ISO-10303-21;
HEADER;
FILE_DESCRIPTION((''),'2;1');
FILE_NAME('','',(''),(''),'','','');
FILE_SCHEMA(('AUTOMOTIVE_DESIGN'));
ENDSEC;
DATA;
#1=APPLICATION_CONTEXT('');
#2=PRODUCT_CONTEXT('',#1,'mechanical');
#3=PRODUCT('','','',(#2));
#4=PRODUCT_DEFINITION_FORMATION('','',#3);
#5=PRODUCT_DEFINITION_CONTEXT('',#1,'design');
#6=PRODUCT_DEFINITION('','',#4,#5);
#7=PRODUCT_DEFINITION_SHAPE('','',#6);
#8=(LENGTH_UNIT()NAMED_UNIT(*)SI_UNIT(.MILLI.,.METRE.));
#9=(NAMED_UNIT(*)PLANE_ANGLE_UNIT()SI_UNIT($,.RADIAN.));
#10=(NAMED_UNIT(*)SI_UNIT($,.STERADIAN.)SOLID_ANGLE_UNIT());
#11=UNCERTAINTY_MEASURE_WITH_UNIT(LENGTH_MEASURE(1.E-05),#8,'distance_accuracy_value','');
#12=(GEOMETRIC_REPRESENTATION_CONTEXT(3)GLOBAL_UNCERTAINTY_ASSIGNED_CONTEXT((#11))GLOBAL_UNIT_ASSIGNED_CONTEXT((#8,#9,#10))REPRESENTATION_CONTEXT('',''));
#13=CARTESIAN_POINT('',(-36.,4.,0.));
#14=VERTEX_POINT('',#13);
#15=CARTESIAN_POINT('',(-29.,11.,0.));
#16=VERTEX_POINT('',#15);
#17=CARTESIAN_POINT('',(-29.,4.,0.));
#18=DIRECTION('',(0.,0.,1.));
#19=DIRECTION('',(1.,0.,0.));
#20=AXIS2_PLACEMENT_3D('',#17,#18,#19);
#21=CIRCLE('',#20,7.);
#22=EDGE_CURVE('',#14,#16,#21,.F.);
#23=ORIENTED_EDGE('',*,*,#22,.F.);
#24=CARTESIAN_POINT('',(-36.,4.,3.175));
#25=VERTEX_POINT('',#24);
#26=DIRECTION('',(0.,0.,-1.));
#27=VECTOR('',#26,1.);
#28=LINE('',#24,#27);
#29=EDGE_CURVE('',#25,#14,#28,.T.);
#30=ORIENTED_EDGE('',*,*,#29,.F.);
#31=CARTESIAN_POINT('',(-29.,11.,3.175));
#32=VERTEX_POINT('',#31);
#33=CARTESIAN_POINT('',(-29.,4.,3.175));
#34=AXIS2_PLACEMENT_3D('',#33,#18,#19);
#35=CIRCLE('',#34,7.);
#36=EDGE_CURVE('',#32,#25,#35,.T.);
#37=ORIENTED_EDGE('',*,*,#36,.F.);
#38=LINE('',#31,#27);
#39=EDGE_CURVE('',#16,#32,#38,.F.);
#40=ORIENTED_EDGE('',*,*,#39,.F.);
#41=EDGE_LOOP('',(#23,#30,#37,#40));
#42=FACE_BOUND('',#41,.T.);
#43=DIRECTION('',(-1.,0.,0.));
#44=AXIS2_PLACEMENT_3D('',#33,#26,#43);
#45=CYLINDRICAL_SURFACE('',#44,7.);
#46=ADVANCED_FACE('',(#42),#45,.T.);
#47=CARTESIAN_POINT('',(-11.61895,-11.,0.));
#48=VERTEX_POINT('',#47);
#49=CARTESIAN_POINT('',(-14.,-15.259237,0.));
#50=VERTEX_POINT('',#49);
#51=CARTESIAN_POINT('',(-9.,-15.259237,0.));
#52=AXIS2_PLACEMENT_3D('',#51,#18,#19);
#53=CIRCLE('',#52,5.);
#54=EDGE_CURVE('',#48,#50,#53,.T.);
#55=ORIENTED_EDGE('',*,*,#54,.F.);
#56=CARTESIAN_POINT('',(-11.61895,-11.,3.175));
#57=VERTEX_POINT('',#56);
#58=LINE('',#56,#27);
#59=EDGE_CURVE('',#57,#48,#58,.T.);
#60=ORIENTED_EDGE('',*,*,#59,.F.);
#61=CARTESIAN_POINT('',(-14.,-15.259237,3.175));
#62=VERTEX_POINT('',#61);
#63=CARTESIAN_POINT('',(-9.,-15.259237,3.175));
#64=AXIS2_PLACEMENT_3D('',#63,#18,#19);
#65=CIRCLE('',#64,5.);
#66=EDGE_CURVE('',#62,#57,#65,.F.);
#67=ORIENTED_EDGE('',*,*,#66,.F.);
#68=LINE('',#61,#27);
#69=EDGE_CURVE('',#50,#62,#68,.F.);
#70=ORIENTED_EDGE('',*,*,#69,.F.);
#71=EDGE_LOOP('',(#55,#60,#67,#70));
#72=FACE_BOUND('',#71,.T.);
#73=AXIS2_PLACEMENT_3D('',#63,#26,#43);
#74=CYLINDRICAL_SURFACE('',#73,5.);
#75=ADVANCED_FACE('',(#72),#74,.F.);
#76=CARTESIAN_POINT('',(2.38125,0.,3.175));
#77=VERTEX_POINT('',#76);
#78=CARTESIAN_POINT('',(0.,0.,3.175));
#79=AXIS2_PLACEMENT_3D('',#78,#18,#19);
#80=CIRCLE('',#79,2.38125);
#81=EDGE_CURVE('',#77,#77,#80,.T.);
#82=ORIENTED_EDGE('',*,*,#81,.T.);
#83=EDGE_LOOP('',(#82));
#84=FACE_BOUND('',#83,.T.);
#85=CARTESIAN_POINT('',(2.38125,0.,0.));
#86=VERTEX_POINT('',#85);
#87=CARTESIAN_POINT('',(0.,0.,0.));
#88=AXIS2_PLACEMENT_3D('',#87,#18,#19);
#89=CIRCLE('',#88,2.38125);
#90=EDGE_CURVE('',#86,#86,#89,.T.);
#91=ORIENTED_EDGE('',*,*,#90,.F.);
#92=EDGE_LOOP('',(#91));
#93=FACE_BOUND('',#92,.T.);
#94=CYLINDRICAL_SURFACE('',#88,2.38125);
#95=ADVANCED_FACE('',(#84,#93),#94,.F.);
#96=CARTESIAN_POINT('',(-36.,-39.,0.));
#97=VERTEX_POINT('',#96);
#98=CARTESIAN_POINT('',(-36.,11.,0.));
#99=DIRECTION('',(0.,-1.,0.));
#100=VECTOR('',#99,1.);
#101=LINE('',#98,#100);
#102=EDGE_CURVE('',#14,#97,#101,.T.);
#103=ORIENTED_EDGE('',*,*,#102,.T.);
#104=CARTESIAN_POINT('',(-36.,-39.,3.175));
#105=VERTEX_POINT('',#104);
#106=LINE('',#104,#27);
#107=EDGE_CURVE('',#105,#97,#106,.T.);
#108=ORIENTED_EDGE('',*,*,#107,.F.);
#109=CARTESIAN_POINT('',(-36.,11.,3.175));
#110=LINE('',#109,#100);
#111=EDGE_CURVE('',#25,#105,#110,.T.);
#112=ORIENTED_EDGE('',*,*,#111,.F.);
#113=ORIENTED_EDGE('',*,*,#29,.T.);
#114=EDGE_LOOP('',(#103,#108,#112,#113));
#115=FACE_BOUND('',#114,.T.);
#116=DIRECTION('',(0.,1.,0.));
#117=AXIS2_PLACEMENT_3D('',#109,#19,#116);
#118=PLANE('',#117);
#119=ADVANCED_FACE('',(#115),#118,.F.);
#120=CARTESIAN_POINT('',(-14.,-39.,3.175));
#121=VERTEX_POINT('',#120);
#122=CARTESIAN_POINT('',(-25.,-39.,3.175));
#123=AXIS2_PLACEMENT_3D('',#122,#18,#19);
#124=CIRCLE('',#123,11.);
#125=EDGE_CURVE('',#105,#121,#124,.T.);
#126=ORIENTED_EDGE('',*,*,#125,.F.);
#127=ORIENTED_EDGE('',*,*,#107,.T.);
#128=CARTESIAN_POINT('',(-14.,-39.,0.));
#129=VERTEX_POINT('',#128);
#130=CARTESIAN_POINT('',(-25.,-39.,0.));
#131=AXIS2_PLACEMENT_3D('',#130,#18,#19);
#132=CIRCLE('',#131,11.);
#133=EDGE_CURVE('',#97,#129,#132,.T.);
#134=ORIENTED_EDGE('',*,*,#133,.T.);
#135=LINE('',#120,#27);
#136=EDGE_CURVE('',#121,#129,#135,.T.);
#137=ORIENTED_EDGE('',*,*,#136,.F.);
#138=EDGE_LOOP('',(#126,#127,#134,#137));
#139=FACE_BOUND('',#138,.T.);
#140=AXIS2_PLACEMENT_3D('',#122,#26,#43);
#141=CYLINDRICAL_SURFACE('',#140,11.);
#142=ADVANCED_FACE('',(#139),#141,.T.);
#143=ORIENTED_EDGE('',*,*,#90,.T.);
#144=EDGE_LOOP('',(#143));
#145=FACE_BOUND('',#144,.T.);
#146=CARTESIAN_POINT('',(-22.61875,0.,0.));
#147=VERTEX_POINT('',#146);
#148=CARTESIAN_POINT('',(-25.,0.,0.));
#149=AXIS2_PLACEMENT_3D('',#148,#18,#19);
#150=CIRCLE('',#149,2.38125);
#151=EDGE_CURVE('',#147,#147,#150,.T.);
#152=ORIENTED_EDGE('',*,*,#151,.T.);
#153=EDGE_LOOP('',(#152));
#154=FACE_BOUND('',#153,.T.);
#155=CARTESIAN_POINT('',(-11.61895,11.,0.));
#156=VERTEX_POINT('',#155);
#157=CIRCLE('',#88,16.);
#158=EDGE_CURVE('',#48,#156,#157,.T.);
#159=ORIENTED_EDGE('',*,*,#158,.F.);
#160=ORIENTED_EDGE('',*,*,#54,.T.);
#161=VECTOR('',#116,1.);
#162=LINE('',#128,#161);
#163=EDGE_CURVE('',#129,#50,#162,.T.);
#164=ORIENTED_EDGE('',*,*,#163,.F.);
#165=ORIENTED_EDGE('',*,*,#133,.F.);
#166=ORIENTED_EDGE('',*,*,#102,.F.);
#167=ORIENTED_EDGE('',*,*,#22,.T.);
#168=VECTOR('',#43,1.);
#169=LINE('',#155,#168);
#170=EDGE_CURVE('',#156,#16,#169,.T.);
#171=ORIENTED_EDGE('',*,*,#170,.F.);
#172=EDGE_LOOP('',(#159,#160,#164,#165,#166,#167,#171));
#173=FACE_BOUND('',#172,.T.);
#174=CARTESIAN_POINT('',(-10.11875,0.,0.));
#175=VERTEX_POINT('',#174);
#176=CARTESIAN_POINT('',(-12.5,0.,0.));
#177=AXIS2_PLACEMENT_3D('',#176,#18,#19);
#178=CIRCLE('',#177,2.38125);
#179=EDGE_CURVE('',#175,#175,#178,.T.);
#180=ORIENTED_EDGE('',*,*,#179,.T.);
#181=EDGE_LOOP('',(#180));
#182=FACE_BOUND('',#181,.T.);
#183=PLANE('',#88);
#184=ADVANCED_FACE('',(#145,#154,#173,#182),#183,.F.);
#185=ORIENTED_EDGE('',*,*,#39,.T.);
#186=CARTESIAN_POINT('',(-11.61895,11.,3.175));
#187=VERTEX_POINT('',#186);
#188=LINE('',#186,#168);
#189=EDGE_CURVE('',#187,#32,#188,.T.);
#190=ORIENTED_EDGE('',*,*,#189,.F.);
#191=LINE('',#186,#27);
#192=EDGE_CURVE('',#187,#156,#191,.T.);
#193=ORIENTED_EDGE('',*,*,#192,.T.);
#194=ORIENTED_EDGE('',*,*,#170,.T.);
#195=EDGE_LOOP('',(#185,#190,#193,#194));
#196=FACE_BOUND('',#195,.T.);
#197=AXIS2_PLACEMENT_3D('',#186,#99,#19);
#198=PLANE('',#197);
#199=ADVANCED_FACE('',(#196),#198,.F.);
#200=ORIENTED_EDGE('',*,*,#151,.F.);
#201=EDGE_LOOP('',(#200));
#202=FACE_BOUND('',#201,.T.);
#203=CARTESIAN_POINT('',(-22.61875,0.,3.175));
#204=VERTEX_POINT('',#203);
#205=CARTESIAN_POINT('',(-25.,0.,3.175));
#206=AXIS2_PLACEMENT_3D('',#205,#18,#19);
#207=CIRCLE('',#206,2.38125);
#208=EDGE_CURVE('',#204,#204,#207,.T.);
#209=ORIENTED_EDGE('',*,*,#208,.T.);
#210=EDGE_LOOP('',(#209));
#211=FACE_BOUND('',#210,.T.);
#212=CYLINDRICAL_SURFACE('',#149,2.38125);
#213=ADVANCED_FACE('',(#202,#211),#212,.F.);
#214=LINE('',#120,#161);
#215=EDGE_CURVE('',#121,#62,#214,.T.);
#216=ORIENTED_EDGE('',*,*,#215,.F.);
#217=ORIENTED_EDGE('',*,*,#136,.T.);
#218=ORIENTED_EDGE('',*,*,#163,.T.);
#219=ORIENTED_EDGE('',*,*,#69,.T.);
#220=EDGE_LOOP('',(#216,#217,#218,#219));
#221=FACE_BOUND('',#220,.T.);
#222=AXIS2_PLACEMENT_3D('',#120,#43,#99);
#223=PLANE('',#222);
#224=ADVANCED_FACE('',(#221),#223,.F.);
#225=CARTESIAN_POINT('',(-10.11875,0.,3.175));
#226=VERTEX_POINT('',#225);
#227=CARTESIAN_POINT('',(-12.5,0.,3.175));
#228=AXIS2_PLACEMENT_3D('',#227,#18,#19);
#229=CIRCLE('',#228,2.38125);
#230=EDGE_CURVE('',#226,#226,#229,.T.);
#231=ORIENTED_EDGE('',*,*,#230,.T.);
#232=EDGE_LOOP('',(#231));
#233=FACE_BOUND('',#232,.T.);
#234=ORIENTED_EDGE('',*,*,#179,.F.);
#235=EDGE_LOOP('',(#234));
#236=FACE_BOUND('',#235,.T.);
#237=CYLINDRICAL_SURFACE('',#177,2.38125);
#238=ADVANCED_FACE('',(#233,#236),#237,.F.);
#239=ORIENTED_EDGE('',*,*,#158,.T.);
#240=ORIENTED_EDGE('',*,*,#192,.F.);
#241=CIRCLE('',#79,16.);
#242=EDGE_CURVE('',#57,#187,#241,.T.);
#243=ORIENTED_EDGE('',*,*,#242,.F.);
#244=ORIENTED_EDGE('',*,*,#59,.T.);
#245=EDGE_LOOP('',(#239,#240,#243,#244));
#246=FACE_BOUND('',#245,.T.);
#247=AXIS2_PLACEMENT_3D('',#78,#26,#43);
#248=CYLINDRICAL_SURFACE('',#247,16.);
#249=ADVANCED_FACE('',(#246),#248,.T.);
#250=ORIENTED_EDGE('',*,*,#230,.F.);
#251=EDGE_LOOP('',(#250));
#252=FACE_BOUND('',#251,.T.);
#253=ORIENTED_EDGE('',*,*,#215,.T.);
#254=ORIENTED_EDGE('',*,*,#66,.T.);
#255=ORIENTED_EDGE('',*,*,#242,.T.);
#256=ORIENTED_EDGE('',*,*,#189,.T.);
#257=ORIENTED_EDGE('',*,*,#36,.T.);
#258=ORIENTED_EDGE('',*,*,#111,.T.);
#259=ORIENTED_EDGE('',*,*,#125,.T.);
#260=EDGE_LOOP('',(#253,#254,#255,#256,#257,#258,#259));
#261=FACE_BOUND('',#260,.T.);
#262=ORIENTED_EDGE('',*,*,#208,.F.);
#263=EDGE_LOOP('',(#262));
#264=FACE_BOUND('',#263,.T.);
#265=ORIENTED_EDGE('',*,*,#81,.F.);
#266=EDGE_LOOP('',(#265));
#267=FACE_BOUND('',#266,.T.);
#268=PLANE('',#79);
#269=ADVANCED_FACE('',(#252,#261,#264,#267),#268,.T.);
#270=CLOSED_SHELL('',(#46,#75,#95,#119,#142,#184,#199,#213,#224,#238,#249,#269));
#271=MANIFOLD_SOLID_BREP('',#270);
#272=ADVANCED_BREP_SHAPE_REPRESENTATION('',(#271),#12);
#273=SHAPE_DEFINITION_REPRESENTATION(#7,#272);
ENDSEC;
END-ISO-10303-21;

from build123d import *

# Parameters (mm, degrees)
BOSS_EXTRUDE1_DEPTH = 3.175
FILLET1_R           = 7
FILLET2_R           = 5
SKETCH2_R           = 2.38125
CUT_EXTRUDE1_DEPTH  = 62.693440697
LPATTERN1_COUNT     = 3
LPATTERN1_PITCH     = 12.5


with BuildPart() as part:
    # Sketch1 → Boss-Extrude1 (new body)
    with BuildSketch(Plane.XY):
        with BuildLine():
            Line((-11.618950039, 11), (-36, 11))
            Line((-36, 11), (-36, -39))
            ThreePointArc((-36, -39), (-25, -50), (-14, -39))
            Line((-14, -39), (-14, -11))
            Line((-14, -11), (-11.618950039, -11))
            ThreePointArc((-11.618950039, -11), (16, 0), (-11.618950039, 11))
        make_face()
    extrude(amount=BOSS_EXTRUDE1_DEPTH)

    # Fillet1
    fillet1_edges = [part.edges().sort_by_distance(p)[0] for p in [
        (-36, 11, 1.5875),
    ]]
    fillet(fillet1_edges, radius=FILLET1_R)

    # Fillet2
    # the kernel refuses this fillet: 5 mm, written as the material it adds along each edge
    with BuildSketch(Plane(origin=(-14, -11, 0), x_dir=(1, 0, 0), z_dir=(0, 0, 1))) as fillet2_piece_1:
        with BuildLine():
            CenterArc((5, -4.259237102), FILLET2_R, 121.586822832, 58.413177168)
            Line((0, -4.259237102), (-0.1, -4.259237102))
            Line((-0.1, -4.259237102), (-0.1, 0))
            Line((-0.1, 0), (0, 0.1))
            ThreePointArc((0, 0.1), (1.190524981, 0.1), (2.328670961, 0.085184742))
            Line((2.328670961, 0.085184742), (2.381049961, 0))
        make_face()
    extrude(amount=3.175)

    # Sketch2 → Cut-Extrude1 (cut, through all)
    with BuildSketch(Plane.XY.offset(3.175)):
        Circle(SKETCH2_R)
    cut_extrude1 = extrude(amount=-CUT_EXTRUDE1_DEPTH, mode=Mode.SUBTRACT)

    # LPattern1: Cut-Extrude1 ×3
    with Locations(*[(-i * LPATTERN1_PITCH, 0, 0) for i in range(1, LPATTERN1_COUNT)]):
        add(cut_extrude1, mode=Mode.SUBTRACT)


solid = part.part
